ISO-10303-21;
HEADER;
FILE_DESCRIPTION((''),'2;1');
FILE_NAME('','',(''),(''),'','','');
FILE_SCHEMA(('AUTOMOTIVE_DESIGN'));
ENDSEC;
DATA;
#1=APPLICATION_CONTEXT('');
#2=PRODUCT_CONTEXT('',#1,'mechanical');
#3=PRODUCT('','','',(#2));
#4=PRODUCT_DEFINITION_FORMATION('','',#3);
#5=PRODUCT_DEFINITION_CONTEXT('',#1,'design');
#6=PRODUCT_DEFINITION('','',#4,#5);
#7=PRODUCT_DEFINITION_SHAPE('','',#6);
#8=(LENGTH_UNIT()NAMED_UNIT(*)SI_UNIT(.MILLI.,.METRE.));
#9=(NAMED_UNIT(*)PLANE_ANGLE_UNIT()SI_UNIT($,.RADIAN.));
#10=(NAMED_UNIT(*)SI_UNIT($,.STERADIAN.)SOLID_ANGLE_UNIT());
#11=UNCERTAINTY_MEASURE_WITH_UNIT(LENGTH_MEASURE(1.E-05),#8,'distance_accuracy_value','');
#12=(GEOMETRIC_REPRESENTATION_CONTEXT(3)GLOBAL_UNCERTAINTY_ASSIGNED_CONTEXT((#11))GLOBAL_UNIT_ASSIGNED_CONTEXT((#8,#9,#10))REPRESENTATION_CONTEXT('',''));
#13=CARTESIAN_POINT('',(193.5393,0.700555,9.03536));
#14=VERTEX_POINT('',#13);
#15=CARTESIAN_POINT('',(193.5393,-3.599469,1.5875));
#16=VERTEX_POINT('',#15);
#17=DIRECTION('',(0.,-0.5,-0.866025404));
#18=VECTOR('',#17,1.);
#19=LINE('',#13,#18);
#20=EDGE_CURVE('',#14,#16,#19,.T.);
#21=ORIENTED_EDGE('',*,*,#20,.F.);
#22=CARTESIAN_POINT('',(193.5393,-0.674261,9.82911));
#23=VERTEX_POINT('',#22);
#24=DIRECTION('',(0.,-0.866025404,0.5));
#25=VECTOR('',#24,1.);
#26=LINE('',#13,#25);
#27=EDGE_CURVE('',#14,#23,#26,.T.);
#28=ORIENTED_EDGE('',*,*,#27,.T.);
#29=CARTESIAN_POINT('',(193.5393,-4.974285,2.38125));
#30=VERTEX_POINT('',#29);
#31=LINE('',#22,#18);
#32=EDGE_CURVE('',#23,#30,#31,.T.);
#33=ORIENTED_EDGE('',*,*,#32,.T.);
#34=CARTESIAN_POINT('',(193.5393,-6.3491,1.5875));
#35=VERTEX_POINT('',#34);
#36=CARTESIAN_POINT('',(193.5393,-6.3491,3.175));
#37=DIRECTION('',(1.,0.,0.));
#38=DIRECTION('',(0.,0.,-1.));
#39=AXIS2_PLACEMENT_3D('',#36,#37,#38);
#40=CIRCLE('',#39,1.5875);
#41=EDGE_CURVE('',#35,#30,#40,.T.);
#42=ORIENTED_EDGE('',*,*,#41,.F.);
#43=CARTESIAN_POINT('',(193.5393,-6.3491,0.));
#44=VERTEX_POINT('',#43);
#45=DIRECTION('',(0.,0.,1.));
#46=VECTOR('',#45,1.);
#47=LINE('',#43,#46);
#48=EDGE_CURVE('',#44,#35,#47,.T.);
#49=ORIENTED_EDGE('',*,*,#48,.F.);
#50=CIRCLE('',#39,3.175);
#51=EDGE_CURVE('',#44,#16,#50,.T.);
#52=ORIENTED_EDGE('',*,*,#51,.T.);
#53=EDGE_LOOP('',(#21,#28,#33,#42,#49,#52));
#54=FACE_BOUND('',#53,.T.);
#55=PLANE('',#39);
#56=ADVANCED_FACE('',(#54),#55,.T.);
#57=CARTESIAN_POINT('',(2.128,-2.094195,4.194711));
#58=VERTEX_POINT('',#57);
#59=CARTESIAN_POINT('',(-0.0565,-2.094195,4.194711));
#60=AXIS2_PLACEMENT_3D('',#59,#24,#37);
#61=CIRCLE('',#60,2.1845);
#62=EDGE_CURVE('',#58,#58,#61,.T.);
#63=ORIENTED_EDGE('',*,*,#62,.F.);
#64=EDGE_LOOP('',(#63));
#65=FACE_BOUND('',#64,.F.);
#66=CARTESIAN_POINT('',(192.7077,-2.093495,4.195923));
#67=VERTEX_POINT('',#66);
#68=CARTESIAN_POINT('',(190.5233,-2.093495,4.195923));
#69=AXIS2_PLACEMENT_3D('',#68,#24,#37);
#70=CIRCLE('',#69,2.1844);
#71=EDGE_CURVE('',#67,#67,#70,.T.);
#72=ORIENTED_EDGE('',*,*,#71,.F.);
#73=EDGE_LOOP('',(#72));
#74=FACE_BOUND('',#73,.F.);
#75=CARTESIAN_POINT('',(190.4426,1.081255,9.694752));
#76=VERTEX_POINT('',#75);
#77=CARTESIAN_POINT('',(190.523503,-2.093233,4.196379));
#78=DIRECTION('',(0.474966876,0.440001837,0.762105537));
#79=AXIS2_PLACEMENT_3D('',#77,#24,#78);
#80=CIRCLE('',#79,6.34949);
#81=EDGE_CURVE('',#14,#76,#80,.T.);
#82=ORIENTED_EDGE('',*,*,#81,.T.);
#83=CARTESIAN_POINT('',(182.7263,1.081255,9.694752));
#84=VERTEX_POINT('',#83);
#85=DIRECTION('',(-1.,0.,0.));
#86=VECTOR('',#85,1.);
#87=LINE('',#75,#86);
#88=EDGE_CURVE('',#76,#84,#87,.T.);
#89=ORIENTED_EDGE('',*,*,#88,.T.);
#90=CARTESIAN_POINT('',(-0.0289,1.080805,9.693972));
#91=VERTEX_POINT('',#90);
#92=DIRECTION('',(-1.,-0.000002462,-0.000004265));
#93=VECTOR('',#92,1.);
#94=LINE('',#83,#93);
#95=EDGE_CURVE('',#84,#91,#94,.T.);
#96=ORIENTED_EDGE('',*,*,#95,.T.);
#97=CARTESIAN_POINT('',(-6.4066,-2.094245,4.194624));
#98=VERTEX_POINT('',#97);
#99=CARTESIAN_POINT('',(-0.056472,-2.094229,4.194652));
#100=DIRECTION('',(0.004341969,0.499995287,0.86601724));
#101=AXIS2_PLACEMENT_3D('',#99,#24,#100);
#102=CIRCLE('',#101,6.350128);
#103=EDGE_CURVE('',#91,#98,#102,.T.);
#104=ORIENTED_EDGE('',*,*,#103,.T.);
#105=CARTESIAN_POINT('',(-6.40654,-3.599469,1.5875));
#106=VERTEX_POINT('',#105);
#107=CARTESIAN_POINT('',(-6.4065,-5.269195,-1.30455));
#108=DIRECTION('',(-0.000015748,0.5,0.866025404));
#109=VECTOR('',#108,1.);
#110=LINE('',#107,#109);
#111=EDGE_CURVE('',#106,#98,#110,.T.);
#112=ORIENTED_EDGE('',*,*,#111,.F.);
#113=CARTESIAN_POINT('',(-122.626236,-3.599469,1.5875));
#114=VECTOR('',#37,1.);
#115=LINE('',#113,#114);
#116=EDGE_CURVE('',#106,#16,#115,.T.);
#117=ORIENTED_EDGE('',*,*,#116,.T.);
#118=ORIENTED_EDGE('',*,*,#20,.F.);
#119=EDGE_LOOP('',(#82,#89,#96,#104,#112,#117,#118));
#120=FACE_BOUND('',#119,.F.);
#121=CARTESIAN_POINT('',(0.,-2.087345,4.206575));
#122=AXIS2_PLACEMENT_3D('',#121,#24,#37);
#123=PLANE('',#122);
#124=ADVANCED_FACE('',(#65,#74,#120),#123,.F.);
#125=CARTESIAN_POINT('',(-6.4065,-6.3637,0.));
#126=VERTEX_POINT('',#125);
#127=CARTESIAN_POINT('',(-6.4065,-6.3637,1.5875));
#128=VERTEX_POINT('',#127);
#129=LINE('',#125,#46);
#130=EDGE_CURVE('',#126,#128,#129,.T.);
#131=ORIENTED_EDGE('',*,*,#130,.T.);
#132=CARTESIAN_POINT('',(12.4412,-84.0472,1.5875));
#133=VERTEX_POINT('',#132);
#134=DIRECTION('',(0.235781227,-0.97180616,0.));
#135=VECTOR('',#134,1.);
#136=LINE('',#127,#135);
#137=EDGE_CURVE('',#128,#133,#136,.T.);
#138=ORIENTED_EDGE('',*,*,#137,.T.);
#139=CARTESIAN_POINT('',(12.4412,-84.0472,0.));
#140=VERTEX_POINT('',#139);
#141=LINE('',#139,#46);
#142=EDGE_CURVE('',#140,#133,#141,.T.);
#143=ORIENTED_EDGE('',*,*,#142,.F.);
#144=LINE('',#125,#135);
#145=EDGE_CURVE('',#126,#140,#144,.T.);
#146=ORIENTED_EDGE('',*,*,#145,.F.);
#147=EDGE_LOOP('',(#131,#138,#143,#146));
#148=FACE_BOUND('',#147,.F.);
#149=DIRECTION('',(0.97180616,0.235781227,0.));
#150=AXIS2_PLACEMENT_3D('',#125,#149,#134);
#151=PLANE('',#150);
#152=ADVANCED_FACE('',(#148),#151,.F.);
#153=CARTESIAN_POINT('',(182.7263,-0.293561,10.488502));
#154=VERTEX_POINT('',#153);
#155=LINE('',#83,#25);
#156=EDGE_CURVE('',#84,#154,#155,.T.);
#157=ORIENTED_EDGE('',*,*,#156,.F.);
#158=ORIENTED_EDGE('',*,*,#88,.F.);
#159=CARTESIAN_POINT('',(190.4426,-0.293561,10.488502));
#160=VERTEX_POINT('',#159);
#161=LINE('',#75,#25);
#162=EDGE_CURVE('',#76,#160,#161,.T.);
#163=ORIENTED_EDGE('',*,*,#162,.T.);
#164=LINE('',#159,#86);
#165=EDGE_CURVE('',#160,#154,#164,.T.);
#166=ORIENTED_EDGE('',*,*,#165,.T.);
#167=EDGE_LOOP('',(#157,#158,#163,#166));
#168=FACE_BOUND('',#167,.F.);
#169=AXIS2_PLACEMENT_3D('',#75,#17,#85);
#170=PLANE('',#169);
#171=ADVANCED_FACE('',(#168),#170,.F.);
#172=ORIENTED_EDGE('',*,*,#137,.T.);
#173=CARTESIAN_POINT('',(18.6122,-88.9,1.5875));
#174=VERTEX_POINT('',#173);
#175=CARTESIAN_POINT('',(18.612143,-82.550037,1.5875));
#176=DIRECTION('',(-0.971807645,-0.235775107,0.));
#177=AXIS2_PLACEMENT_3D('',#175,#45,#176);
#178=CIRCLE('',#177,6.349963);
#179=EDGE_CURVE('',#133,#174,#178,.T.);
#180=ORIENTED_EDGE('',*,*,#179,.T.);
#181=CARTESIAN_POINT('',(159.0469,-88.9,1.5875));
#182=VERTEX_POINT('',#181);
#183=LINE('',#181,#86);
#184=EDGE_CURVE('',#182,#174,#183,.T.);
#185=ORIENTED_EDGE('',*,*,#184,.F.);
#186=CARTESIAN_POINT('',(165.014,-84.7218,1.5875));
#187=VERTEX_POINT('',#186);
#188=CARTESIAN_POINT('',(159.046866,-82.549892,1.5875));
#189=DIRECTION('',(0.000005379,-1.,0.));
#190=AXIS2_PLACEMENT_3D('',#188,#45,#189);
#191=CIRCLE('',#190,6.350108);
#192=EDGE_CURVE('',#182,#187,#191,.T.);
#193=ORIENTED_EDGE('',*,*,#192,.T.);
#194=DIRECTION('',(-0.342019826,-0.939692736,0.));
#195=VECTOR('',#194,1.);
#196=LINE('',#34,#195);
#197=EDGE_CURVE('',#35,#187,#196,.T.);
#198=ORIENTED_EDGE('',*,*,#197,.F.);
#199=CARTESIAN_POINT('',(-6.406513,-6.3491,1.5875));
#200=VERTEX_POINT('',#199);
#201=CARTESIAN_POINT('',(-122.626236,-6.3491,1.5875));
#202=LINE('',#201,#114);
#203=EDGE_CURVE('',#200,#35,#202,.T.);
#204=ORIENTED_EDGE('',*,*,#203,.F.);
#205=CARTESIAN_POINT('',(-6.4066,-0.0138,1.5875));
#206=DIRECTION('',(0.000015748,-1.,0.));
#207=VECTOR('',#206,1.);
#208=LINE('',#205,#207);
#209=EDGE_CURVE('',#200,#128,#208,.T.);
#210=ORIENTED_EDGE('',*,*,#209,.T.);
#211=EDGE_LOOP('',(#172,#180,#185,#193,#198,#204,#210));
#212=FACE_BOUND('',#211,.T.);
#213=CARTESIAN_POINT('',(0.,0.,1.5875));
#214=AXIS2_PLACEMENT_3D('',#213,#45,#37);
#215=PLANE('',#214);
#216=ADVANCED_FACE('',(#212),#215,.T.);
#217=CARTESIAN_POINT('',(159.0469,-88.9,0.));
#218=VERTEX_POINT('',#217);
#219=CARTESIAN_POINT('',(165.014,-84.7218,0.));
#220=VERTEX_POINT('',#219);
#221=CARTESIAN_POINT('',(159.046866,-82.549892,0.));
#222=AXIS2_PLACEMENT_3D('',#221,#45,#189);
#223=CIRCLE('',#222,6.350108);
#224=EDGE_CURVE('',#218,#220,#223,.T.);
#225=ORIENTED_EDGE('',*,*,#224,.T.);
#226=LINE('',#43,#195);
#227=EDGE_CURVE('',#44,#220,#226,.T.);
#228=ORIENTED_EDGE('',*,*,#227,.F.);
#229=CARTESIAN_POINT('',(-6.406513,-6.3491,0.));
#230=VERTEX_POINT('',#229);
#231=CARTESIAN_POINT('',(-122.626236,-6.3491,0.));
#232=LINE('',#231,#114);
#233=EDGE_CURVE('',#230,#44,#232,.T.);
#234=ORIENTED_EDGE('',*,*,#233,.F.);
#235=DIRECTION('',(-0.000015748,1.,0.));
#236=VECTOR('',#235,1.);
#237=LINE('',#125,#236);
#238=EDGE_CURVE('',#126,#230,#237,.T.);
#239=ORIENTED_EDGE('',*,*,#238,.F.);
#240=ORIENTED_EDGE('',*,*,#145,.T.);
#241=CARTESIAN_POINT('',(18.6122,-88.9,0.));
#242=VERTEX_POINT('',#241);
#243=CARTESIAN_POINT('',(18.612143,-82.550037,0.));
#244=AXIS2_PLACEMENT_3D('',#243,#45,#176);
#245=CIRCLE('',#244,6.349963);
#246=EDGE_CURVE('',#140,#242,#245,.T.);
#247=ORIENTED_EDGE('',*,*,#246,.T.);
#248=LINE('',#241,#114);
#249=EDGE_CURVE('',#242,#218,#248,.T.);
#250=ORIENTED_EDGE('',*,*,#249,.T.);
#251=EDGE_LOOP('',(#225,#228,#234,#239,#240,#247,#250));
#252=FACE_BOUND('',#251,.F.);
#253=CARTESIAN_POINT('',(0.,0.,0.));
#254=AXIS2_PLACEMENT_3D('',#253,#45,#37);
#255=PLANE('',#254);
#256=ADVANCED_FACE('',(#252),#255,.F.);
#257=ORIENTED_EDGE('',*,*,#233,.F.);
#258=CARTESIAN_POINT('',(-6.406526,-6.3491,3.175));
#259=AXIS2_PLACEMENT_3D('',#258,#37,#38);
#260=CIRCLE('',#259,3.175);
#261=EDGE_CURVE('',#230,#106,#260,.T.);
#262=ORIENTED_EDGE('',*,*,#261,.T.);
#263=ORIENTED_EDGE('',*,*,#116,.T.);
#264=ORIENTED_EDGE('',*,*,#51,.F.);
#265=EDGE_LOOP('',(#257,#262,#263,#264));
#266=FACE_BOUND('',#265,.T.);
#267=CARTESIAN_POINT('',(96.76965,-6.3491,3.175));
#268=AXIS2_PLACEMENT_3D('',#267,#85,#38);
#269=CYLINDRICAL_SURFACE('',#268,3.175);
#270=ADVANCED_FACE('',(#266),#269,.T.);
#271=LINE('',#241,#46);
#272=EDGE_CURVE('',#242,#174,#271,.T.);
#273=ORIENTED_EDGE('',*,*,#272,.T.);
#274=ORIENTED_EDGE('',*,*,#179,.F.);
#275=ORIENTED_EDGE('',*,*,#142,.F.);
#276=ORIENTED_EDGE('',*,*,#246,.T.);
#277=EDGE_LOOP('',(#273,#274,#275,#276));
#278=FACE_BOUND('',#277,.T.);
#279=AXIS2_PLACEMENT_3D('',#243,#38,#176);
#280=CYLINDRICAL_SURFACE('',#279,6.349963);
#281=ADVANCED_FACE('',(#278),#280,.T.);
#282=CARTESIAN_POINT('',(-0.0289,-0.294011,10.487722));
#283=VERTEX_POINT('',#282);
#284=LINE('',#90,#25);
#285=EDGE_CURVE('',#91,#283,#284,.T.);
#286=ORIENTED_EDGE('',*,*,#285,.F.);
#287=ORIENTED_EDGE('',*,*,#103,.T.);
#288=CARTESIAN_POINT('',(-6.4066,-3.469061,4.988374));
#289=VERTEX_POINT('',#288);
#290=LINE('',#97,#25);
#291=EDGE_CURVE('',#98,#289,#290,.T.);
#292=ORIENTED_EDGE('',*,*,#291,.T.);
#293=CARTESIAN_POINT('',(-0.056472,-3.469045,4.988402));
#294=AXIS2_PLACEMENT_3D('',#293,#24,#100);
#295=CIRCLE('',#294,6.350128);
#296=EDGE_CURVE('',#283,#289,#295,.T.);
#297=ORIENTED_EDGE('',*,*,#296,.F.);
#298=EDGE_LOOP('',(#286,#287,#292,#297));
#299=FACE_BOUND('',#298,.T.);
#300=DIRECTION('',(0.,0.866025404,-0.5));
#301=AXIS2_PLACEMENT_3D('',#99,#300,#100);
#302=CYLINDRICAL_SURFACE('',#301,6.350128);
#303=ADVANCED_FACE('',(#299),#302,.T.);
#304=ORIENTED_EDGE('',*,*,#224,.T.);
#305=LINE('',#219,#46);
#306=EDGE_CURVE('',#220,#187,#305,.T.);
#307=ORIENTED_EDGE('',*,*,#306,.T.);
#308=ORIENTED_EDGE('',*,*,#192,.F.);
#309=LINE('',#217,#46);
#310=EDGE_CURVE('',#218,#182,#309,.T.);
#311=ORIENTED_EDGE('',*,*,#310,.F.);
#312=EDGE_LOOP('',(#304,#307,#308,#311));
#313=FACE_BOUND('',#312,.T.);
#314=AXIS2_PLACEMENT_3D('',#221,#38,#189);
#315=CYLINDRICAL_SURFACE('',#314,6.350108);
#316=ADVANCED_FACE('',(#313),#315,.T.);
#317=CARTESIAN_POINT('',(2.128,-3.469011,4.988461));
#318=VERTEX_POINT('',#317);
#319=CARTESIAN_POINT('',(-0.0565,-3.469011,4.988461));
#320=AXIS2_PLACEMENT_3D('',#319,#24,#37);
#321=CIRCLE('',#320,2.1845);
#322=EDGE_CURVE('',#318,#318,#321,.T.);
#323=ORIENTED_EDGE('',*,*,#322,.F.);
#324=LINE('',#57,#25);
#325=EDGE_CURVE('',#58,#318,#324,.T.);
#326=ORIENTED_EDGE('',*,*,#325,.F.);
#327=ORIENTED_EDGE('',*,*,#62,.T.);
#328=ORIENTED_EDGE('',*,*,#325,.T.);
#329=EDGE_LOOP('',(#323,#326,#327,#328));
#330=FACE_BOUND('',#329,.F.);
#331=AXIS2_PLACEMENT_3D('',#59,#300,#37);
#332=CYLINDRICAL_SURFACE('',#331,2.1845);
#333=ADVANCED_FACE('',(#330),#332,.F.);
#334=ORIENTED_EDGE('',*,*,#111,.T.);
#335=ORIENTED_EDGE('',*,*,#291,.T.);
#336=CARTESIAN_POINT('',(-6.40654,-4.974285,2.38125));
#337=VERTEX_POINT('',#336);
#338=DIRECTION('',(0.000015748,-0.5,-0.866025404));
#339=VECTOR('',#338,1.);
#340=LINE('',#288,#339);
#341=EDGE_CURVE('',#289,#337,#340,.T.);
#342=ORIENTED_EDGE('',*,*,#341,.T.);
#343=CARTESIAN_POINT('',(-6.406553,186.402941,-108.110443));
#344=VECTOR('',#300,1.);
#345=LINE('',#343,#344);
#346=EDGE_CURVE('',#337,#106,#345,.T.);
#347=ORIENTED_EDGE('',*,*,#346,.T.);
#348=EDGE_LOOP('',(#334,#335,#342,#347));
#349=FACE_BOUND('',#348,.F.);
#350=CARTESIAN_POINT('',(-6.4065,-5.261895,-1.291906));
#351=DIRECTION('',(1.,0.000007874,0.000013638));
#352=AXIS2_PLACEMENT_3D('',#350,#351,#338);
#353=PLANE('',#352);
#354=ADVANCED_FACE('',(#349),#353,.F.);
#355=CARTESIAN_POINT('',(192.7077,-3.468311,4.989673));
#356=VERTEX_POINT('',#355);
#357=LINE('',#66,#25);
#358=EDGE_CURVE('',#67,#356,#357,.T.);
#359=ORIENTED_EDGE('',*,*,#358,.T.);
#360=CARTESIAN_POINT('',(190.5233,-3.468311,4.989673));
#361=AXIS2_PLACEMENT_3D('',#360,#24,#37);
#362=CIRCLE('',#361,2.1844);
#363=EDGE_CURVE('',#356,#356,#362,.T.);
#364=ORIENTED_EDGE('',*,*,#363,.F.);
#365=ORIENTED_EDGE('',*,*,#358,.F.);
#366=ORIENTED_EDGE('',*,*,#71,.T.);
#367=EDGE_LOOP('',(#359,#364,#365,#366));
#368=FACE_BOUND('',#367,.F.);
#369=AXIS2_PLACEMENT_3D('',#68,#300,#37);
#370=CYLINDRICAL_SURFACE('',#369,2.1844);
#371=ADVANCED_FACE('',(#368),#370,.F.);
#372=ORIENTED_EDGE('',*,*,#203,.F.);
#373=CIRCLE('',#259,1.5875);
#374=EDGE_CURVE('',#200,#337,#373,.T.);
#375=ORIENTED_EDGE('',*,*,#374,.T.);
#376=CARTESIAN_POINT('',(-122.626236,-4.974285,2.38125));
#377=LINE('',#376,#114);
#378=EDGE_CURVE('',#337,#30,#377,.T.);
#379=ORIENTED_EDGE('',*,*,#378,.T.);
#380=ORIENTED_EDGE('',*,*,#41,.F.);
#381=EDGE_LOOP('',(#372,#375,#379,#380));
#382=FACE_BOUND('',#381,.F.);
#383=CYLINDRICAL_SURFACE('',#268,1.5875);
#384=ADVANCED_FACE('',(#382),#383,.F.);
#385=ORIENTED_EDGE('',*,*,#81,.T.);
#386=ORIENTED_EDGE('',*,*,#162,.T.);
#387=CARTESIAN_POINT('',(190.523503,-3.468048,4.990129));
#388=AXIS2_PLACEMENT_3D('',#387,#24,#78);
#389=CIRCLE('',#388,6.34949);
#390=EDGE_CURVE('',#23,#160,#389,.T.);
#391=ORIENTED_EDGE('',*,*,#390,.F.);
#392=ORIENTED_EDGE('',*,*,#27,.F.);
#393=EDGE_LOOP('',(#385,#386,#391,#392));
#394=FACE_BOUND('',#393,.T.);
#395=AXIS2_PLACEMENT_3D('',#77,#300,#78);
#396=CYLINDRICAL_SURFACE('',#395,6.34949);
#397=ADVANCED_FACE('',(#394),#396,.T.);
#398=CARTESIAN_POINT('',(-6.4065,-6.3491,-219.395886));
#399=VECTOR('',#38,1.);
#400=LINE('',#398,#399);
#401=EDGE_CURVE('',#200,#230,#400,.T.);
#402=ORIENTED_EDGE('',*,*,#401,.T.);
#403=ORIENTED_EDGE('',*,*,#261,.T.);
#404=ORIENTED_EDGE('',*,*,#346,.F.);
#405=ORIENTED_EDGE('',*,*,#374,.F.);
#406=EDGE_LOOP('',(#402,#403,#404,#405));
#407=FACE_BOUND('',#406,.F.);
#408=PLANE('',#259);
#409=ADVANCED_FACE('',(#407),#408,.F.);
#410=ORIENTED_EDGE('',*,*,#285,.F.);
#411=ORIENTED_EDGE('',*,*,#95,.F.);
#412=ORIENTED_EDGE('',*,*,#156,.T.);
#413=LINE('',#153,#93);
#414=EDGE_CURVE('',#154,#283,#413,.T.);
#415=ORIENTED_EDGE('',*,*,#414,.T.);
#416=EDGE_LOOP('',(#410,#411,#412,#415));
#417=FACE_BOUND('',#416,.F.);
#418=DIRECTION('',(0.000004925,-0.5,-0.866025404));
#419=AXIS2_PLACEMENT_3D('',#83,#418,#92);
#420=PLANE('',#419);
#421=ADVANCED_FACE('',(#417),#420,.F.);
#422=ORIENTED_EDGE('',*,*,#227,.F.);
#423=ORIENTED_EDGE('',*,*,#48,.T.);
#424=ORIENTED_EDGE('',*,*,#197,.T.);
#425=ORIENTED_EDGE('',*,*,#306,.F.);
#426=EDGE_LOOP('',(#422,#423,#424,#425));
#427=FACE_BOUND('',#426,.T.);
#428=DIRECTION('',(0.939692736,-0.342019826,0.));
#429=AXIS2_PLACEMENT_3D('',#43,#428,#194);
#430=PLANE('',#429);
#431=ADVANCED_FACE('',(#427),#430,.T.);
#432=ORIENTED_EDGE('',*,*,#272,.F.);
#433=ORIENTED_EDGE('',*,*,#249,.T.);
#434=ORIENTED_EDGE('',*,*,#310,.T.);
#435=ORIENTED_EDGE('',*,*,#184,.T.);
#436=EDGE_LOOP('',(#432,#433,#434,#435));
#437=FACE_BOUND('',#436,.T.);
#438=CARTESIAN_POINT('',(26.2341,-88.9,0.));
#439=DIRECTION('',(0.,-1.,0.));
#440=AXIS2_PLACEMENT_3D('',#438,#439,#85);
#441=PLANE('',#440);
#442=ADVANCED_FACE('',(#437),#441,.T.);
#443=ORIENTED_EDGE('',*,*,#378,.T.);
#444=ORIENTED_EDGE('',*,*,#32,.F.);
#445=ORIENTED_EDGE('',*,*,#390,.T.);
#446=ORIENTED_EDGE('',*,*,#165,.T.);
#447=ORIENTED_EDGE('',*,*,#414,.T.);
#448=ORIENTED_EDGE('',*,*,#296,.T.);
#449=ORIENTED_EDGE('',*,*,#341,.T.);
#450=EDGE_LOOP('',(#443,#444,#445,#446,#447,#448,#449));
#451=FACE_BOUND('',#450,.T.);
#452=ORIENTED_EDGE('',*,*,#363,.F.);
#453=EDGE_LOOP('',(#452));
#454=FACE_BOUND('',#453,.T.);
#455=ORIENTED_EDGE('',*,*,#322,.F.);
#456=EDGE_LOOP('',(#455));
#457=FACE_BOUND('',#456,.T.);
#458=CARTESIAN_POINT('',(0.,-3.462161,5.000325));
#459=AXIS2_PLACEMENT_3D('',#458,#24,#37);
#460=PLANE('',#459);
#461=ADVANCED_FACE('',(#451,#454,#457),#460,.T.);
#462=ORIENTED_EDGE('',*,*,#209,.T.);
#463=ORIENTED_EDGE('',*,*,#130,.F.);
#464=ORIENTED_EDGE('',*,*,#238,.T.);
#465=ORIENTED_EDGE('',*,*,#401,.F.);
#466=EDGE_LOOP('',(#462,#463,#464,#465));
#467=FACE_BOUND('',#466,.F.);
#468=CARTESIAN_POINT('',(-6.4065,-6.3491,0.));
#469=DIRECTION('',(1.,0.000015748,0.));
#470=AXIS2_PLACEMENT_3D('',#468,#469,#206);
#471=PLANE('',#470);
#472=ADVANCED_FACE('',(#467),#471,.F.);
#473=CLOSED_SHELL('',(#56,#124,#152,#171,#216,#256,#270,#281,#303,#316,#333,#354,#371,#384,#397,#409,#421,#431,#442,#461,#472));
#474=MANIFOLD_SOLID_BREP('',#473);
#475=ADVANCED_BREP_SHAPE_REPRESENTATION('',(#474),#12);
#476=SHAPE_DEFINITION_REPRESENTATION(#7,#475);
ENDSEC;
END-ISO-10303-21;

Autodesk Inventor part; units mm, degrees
ref_plane "YZ Plane" through (0, 0, 0) normal (1, 0, 0) x (0, 1, 0)
ref_plane "XZ Plane" through (0, 0, 0) normal (0, 1, 0) x (-1, 0, 0)
ref_plane "XY Plane" through (0, 0, 0) normal (0, 0, 1) x (1, 0, 0)
sketch "Sketch1" plane through (0, 0, 0) normal (0, 0, 1) x (1, 0, 0)
  line L0 (26.2341, -88.9) -> (159.0469, -88.9)
  circle A0 centre (190.5233, -0.0123) radius 2.1844
  arc A1 (193.5393, 5.5758) -> (190.4426, 6.3372) centre (190.5233, -0.0123) ccw
  line L1 (165.0634, -0.0075) -> (177.7634, -0.0075) construction
  line L2 (190.4426, 6.3372) -> (182.7263, 6.3372)
  line L3 (182.7263, 6.3372) -> (-0.0289, 6.3363)
  line L4 (193.5393, 5.5758) -> (193.5393, -6.3491)
  line L5 (193.5393, -6.3491) -> (165.014, -84.7218)
  arc A2 (159.0469, -88.9) -> (165.014, -84.7218) centre (159.0469, -82.55) ccw
  circle A3 centre (-0.0565, -0.0137) radius 2.1845
  arc A4 (-0.0289, 6.3363) -> (-6.4066, -0.0138) centre (-0.0565, -0.0137) ccw
  line L6 (26.2341, -88.9) -> (18.6122, -88.9)
  arc A5 (12.4412, -84.0472) -> (18.6122, -88.9) centre (18.6122, -82.55) ccw
  line L7 (193.5393, -6.3491) -> (-6.4065, -6.3491)
  line L8 (-6.4066, -0.0137) -> (-6.4065, -6.3637)
  line L9 (-6.4065, -6.3637) -> (12.4412, -84.0472)
  point P0 (157.3842, 6.3371)
  point P1 (13.5341, -88.9)
  dimension "d9" = 4.3688
  dimension "d26" = 6.35
  dimension "d29" = 12.7
  dimension "d30" = 6.35
extrude "Extrusion1" add sketch "Sketch1" along normal blind 1.5875
bend part "Bend Part1" radius 3.175 angle 60 line through (193.5393, -6.3491, 0) along (-1, 0, 0) centre toward (0, 0, 1) moving side (0, 1, 0) both sides no
properties part number "wing_wedge" material "Acetal Resin, White"
